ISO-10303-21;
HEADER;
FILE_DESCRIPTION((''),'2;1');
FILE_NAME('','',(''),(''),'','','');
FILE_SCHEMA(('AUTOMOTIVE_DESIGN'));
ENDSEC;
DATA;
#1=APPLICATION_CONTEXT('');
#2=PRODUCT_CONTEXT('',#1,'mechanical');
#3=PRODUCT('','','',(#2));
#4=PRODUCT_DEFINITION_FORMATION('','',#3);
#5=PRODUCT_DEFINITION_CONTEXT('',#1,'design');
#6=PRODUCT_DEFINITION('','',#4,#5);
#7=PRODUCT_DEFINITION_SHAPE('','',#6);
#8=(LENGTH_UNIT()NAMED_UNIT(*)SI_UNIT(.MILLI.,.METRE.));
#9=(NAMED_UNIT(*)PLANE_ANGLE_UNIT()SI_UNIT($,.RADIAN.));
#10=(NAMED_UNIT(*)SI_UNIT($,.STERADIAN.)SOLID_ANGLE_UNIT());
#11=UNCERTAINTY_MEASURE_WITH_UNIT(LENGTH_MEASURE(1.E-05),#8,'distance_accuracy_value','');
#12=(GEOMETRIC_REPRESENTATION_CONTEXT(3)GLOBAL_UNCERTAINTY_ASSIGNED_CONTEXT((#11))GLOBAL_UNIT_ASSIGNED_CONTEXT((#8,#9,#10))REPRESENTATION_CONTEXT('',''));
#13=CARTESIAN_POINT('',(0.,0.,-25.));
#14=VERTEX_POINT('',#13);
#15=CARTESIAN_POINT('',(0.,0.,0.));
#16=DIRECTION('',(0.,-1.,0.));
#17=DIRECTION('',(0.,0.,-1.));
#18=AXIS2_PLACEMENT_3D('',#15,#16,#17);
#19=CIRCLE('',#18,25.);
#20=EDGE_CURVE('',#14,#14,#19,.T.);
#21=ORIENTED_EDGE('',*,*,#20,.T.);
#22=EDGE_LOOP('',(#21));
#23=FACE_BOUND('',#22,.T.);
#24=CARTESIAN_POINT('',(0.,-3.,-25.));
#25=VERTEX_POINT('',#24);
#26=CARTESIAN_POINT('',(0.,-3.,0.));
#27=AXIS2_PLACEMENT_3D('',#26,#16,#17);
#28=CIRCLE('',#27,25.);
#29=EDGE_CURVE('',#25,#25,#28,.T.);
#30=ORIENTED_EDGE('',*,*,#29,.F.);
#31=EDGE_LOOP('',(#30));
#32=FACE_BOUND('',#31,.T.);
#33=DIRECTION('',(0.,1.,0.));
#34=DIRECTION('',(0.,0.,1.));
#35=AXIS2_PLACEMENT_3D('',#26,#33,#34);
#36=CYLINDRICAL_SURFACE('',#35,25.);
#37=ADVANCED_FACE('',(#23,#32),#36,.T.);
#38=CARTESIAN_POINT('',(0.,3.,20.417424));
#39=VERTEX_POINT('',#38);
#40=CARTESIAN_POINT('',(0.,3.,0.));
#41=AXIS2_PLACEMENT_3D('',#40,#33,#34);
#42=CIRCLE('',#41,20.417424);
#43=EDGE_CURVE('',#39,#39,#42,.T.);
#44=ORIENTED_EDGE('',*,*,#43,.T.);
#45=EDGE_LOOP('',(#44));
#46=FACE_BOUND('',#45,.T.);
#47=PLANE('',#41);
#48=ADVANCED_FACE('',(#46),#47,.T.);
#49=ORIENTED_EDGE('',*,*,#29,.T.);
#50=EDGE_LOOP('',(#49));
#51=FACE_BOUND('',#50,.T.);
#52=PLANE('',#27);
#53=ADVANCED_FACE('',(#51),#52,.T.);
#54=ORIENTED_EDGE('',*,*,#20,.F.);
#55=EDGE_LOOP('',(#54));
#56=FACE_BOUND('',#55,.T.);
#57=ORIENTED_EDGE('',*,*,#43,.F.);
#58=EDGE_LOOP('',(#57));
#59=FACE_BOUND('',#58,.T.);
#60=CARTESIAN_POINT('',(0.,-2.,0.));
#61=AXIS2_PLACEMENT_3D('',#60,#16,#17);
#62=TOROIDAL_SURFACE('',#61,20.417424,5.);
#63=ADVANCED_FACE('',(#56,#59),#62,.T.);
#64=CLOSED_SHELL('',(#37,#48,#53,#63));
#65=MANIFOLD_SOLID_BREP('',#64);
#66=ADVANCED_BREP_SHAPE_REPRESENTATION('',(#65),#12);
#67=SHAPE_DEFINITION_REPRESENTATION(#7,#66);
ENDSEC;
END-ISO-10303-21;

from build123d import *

# Parameters (mm, degrees)
SKETCH1_R           = 25
BOSS_EXTRUDE1_DEPTH = 3
FILLET1_R           = 5
SKETCH9_R           = 25
BOSS_EXTRUDE2_DEPTH = 3


with BuildPart() as part:
    # Sketch1 → Boss-Extrude1 (new body)
    with BuildSketch(Plane(origin=(0, 0, 0), x_dir=(1, 0, 0), z_dir=(0, 1, 0))):
        with Locations(Location((0, 0, 0), (0, 0, 270))):
            Circle(SKETCH1_R)
    extrude(amount=BOSS_EXTRUDE1_DEPTH)

    # Fillet1
    # the kernel refuses this fillet: 5 mm, written as the material it takes off along each edge
    with BuildSketch(Plane(origin=(0, 3, 0), x_dir=(0, 0, 1), z_dir=(-1, 0, 0))) as fillet1_piece_1:
        with BuildLine():
            CenterArc((20.417424305, -5), FILLET1_R, 23.578178478, 66.421821522)
            Line((20.417424305, 0), (20.417424305, 0.1))
            Line((20.417424305, 0.1), (25, 0.1))
            Line((25, 0.1), (25.1, 0))
            ThreePointArc((25.1, 0), (25.1, -1.5), (25.091651514, -2.96))
            Line((25.091651514, -2.96), (25, -3))
        make_face()
    revolve(axis=Axis((0, 3, 0), (0, 1, 0)), mode=Mode.SUBTRACT)

    # Sketch9 → Boss-Extrude2 (add)
    with BuildSketch(Plane.XZ):
        with Locations(Location((0, 0, 0), (0, 0, 270))):
            Circle(SKETCH9_R)
    extrude(amount=BOSS_EXTRUDE2_DEPTH)


solid = part.part
